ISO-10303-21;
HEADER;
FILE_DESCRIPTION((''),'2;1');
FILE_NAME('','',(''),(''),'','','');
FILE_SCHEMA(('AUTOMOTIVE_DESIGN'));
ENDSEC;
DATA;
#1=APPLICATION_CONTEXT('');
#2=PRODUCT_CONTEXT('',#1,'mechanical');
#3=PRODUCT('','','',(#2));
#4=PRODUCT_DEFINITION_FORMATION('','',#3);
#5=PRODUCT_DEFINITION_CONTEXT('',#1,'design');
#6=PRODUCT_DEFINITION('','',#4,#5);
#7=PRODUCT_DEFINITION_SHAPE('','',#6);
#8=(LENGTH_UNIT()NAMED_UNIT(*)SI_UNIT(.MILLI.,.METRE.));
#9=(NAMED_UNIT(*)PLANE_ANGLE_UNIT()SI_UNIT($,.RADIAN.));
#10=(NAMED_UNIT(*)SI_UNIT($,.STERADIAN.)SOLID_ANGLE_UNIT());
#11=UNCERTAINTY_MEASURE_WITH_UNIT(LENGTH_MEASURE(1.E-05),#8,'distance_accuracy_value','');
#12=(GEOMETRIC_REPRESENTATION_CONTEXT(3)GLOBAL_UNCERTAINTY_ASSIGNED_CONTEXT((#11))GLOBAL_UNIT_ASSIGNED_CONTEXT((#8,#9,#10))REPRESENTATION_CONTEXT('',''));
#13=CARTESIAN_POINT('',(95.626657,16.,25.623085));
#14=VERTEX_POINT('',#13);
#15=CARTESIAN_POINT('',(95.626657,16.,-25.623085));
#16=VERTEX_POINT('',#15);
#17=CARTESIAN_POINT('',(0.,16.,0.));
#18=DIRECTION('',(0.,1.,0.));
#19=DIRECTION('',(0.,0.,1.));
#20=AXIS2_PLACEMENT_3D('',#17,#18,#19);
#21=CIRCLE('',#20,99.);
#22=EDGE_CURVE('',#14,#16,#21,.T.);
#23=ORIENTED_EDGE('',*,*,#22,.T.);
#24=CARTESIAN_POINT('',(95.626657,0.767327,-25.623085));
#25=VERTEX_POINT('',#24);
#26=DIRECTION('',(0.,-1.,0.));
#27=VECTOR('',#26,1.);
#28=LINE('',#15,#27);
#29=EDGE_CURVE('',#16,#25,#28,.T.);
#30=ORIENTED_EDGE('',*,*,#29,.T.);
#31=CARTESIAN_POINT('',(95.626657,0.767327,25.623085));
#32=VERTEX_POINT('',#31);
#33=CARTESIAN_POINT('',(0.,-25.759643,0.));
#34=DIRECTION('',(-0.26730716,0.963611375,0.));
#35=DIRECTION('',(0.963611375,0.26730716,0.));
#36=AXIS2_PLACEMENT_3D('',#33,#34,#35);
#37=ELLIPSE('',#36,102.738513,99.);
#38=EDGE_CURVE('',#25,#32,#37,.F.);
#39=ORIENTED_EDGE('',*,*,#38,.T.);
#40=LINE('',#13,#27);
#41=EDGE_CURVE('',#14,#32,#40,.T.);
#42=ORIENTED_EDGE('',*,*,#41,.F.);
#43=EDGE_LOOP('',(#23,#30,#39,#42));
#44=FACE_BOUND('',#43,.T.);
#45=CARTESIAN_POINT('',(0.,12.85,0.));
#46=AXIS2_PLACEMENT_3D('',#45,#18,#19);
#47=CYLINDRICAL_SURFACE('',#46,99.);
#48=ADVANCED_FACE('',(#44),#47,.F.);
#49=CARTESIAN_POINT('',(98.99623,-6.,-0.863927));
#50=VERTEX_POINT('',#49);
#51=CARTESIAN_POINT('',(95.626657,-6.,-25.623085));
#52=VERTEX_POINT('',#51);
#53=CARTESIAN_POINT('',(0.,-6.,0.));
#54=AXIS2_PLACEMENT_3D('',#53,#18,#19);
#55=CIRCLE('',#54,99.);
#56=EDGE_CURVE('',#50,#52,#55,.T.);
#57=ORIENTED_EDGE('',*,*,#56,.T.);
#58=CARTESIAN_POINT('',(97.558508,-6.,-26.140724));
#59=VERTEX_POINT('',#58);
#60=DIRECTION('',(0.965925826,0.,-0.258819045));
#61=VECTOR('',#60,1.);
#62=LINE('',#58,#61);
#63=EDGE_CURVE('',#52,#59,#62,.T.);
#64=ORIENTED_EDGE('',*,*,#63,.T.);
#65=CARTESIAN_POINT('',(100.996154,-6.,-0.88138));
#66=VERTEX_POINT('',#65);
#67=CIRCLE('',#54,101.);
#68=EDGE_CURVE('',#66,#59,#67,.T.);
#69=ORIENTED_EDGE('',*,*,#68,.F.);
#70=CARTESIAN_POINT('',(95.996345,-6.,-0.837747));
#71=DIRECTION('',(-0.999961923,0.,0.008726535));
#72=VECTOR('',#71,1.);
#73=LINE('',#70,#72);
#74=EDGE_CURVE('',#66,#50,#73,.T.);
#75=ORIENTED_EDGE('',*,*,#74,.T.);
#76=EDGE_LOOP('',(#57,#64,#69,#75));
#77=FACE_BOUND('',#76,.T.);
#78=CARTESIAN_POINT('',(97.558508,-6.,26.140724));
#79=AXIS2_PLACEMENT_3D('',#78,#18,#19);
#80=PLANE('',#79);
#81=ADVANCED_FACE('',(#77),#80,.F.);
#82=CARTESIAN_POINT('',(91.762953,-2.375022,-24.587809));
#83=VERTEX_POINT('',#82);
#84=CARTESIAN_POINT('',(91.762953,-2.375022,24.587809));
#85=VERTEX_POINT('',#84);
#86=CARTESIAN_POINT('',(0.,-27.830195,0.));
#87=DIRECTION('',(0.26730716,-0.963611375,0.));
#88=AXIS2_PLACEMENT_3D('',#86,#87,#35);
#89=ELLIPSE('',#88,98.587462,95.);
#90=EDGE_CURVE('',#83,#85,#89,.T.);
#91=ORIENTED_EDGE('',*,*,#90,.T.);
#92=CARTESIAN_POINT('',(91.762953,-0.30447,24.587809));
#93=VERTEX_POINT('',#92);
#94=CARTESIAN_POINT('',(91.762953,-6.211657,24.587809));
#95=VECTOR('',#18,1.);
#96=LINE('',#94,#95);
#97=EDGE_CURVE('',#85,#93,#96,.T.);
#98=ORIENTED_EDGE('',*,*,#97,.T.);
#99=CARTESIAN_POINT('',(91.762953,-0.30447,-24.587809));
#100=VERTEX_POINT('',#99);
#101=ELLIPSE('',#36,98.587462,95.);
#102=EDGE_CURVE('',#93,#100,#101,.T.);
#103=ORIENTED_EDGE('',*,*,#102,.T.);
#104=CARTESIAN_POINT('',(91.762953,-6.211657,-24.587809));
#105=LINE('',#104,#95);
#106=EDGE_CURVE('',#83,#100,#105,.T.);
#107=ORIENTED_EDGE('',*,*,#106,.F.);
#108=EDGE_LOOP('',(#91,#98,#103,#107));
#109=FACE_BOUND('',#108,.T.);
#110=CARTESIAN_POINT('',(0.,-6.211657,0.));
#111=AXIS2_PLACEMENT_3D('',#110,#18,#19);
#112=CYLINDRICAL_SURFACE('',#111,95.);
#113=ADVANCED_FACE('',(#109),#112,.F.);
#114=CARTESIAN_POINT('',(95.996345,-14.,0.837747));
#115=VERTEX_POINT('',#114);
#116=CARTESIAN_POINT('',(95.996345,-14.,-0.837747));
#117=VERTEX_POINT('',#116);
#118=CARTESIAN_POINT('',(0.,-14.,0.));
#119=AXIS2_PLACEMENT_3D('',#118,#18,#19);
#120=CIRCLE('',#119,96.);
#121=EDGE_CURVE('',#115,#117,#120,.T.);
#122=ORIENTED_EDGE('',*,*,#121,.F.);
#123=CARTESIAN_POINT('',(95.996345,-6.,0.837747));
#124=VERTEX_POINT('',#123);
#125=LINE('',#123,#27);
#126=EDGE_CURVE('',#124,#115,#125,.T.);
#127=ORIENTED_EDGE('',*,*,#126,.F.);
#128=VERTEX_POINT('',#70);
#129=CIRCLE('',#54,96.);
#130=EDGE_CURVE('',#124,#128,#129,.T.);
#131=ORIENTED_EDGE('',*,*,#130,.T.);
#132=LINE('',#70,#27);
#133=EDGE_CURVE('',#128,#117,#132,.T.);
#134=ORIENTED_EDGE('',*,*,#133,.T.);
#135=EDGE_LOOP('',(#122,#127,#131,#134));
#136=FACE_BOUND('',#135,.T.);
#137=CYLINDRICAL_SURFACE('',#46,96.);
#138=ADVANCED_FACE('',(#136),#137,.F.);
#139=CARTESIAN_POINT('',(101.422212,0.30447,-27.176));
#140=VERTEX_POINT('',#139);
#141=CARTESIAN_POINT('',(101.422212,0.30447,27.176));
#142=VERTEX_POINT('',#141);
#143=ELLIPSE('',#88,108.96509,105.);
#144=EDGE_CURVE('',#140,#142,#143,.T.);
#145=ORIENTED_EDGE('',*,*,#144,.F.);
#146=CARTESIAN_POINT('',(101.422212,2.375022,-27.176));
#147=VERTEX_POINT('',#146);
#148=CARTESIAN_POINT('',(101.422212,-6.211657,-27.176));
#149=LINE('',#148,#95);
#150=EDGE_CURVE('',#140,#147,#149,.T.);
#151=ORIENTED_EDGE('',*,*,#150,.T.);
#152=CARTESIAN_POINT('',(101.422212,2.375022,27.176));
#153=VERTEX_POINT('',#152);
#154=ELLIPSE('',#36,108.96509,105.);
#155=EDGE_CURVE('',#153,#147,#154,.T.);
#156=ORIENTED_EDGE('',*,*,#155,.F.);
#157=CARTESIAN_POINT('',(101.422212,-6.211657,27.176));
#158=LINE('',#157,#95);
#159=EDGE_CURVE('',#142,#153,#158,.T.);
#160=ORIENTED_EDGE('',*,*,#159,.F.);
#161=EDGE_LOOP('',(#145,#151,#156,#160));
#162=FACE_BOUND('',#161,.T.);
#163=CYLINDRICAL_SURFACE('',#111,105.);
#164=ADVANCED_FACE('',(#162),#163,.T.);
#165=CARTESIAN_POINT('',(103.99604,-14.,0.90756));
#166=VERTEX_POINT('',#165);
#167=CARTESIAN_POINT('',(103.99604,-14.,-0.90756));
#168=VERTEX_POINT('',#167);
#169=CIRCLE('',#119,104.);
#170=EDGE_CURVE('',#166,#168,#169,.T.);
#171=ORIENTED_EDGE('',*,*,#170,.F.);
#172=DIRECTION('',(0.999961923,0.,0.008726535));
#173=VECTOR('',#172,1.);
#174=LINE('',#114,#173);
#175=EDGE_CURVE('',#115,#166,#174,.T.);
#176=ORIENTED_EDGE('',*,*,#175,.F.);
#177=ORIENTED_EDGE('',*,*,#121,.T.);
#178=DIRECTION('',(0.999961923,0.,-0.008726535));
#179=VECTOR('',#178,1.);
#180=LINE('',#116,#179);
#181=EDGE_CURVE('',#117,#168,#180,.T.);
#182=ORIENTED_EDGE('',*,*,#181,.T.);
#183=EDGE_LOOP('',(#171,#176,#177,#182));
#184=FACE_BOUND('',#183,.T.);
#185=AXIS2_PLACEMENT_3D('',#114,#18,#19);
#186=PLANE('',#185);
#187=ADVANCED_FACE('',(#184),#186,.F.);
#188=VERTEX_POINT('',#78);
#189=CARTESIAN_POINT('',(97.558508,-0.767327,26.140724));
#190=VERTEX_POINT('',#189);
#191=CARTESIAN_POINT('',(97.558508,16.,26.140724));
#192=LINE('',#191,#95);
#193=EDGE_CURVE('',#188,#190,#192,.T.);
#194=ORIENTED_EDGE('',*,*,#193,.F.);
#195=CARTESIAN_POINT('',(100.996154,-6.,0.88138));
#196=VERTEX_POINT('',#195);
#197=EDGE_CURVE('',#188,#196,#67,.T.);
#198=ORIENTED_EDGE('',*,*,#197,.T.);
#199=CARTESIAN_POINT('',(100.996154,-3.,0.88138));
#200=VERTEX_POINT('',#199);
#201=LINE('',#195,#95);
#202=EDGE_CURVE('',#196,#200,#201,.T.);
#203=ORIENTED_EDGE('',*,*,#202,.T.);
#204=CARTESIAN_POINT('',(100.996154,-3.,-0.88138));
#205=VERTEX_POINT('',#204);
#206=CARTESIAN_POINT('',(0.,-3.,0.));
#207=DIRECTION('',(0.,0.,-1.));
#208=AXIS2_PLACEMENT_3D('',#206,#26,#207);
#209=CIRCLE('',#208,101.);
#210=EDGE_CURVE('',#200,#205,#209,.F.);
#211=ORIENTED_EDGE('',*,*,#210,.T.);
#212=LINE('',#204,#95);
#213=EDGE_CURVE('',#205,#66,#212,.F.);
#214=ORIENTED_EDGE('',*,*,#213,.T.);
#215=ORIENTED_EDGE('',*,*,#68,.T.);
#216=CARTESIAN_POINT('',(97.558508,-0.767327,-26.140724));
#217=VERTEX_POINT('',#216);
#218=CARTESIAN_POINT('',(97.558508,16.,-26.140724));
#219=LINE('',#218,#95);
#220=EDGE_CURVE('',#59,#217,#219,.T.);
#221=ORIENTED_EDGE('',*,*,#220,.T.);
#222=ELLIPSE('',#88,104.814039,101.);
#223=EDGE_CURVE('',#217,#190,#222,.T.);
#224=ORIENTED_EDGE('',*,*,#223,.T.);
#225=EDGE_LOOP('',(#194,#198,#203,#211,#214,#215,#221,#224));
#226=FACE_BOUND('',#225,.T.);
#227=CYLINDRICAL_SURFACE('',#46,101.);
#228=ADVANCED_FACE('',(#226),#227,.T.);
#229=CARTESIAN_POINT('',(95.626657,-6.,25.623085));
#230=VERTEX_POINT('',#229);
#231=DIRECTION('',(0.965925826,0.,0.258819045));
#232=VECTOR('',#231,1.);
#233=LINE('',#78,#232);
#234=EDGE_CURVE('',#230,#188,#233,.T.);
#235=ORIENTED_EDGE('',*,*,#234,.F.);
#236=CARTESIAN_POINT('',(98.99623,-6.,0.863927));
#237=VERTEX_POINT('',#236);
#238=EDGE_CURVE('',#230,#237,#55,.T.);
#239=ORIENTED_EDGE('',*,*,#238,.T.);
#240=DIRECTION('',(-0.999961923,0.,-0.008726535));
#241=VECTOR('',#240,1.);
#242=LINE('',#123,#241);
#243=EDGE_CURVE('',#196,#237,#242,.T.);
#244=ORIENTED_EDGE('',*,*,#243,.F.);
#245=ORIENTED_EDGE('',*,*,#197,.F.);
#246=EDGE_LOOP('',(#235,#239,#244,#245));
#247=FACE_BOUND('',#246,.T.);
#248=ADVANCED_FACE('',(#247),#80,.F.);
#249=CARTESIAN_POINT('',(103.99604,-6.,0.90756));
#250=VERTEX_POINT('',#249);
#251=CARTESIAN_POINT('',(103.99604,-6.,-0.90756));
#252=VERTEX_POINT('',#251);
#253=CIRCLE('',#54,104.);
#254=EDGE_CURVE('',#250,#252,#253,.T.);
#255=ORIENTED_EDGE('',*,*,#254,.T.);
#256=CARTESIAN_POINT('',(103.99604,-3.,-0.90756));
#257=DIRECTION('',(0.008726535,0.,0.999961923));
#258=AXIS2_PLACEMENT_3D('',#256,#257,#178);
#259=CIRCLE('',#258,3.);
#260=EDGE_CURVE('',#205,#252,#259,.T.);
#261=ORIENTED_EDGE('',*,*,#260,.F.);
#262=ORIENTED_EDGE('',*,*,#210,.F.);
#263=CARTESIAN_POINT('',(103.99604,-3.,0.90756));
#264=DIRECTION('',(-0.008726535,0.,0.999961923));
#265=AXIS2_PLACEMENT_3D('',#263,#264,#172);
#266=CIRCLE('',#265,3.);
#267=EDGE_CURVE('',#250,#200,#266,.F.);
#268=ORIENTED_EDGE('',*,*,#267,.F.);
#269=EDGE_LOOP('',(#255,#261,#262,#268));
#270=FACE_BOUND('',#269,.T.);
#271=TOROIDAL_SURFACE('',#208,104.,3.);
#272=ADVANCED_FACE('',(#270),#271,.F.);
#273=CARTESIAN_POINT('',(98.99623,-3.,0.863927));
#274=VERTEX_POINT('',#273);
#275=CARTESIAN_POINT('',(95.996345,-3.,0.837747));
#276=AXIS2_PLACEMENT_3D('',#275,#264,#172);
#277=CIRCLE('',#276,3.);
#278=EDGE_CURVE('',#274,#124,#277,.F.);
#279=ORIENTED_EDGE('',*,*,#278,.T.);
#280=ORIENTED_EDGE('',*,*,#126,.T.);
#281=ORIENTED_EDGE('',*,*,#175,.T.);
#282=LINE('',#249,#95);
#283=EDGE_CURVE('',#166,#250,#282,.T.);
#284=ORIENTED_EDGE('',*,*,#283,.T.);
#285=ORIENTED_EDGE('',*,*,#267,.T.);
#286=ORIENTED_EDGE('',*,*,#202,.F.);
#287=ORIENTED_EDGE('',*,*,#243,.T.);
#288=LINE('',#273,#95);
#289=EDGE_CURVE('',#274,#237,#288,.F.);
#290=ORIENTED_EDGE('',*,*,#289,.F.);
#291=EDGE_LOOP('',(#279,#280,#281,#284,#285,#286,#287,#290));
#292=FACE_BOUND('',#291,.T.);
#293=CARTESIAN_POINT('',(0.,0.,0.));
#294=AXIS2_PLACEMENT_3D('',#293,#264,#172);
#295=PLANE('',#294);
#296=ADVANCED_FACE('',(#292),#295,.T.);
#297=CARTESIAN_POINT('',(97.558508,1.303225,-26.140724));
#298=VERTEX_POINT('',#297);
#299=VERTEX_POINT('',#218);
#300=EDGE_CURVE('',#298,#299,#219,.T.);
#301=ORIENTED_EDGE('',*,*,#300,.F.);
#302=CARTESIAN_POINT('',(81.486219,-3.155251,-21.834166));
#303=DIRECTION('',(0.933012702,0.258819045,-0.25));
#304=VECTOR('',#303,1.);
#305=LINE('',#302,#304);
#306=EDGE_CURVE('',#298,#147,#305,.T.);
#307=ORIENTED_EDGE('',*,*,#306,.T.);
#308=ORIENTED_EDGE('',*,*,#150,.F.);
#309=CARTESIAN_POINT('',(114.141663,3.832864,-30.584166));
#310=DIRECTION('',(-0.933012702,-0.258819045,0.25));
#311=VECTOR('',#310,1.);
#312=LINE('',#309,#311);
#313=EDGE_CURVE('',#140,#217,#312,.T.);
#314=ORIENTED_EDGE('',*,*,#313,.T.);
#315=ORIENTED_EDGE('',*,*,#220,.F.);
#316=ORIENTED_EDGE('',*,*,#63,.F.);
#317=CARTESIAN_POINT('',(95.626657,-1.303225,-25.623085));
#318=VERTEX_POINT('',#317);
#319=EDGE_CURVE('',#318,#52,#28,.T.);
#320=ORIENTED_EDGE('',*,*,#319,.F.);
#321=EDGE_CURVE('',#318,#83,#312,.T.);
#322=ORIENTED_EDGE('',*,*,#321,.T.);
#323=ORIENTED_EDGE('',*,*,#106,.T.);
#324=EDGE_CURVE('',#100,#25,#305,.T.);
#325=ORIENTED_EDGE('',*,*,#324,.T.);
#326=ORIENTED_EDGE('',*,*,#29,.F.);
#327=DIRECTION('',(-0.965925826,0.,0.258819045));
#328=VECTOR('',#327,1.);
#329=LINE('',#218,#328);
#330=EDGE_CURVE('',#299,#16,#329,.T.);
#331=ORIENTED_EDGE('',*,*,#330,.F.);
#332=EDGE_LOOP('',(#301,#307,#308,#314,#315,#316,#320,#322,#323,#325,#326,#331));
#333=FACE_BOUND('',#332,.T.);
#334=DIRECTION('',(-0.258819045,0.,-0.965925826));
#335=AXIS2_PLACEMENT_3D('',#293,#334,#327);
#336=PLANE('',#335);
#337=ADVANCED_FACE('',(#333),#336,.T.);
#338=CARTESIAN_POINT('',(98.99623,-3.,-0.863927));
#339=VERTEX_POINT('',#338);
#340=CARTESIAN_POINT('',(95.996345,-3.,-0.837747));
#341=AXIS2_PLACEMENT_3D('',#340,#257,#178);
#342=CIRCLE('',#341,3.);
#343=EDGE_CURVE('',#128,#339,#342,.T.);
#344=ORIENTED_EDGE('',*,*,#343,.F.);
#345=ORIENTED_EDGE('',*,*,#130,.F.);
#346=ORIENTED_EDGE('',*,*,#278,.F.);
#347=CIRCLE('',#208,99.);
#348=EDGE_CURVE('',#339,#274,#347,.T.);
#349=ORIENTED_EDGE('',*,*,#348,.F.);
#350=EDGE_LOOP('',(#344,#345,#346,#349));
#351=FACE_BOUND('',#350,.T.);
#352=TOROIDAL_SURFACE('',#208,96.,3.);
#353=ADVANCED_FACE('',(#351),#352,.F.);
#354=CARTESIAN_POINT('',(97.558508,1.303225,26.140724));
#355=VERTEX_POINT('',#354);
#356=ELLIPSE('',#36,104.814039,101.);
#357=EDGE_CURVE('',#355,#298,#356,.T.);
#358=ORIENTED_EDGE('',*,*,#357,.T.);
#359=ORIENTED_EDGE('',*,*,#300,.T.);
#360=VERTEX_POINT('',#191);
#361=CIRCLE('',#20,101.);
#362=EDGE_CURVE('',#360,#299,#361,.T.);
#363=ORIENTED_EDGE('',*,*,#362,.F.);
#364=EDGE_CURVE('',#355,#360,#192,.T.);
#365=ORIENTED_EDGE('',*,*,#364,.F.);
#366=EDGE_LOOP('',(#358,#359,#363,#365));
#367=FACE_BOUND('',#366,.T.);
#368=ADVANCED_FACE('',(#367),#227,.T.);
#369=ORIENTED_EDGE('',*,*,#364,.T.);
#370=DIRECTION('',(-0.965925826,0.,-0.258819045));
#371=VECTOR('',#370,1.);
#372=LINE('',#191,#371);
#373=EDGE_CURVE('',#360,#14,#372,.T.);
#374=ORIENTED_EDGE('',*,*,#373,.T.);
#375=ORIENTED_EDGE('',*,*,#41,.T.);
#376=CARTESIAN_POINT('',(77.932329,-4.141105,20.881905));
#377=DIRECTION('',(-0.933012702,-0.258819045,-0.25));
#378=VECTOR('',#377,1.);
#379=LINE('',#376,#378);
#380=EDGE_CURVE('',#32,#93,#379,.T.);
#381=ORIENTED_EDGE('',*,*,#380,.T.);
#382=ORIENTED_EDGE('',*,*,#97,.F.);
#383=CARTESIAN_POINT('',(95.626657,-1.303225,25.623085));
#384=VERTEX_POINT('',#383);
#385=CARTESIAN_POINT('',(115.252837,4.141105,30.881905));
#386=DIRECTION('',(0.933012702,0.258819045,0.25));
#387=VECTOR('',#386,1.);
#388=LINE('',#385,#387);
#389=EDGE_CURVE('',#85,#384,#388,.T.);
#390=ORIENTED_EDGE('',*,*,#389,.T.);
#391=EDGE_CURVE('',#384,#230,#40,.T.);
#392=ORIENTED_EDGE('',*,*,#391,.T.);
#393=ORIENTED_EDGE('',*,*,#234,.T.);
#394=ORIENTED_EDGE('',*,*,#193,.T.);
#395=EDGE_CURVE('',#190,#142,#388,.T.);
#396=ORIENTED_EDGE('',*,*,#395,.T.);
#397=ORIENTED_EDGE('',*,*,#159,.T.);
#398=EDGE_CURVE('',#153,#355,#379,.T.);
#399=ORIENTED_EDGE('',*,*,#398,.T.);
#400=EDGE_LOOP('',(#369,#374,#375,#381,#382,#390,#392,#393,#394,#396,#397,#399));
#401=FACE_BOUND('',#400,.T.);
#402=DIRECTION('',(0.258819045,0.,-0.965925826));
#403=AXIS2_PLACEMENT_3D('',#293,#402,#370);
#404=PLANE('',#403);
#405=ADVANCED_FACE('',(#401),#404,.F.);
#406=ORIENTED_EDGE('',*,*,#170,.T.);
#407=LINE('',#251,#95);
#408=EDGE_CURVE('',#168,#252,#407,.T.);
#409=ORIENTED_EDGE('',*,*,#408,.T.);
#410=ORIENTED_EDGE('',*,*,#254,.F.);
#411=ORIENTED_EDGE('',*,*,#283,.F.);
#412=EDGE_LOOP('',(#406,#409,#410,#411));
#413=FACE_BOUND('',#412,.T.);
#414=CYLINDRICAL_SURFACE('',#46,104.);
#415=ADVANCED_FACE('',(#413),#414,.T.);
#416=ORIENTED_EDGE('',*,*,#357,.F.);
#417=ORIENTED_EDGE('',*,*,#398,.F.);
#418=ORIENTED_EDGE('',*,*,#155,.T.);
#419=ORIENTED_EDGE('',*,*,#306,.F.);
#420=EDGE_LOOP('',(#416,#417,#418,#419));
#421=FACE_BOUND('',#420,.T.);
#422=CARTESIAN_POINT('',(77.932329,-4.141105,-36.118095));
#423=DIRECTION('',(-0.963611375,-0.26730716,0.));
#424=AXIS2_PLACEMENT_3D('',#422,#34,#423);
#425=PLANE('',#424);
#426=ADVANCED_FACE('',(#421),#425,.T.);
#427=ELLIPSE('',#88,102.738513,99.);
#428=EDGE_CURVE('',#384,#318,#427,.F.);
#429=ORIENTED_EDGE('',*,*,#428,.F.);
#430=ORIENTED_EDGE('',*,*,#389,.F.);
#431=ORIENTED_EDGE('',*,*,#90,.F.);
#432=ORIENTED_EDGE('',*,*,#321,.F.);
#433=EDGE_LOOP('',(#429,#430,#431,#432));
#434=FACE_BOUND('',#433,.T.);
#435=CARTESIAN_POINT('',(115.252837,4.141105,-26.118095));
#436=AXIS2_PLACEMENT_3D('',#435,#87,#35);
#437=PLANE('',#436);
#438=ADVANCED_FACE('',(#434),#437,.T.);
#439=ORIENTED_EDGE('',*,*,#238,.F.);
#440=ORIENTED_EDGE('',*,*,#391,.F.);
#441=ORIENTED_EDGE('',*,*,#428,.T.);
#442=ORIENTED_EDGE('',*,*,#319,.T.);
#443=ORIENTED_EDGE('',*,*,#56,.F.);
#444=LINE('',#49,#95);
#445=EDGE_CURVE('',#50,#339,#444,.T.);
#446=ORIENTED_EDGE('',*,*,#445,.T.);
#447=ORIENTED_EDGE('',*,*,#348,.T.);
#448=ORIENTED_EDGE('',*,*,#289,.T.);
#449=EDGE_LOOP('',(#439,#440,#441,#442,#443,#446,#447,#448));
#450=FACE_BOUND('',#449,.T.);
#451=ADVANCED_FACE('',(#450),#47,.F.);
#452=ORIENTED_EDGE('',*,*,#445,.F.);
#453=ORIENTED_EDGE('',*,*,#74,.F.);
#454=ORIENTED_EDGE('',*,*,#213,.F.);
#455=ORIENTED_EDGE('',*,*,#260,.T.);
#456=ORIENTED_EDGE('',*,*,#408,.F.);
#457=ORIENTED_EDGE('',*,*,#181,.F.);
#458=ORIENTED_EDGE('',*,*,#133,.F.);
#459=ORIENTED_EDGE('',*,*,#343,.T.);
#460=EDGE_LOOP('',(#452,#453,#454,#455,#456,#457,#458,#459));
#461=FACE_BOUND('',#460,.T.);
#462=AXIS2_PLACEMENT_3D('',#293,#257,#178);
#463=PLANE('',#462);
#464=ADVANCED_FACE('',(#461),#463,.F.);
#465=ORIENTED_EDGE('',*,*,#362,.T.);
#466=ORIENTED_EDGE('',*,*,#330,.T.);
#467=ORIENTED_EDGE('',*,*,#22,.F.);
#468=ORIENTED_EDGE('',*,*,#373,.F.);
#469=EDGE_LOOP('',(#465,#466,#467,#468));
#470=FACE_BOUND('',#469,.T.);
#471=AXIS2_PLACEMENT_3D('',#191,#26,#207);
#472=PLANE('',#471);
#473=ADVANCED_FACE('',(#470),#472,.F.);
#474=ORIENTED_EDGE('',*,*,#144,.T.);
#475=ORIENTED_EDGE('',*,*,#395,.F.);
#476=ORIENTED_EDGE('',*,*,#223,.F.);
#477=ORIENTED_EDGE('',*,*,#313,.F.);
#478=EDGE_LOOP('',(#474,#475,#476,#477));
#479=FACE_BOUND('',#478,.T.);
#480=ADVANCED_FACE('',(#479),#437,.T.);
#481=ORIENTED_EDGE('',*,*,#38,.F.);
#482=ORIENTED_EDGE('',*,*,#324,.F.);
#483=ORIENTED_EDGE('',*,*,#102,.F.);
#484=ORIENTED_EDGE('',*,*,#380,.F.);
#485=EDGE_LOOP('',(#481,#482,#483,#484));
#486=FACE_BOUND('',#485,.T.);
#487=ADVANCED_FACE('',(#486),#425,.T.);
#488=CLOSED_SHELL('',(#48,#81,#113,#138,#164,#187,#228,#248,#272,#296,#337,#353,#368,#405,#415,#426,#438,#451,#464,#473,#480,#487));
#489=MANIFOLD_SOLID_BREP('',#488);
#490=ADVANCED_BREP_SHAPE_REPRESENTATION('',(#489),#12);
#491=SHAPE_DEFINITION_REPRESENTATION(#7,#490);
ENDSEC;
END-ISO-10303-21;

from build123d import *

# Parameters (mm, degrees)
SKETCH1_W           = 2
SKETCH1_H           = 22
REVOLVE1_ANGLE      = 30
BOSS_EXTRUDE2_DEPTH = 57
CUT_EXTRUDE1_START  = -6.211657082
CUT_EXTRUDE1_DEPTH  = 12.423314164
SKETCH16_W          = 8
SKETCH16_H          = 8
REVOLVE2_ANGLE      = 1
FILLET2_R           = 3


# Read off the part's stored shape, not the designer's step: Cut-Extrude1
with BuildPart() as part:
    # Sketch1 → Revolve1 (revolve, symmetric)
    with BuildSketch(Plane.XY) as revolve1_sk:
        with Locations((100, 5)):
            Rectangle(SKETCH1_W, SKETCH1_H)
    revolve(axis=Axis((0, 12.85, 0), (0, -1, 0)), revolution_arc=REVOLVE1_ANGLE / 2)
    revolve(revolve1_sk.sketch, axis=Axis((0, 12.85, 0), (0, 1, 0)), revolution_arc=REVOLVE1_ANGLE / 2)

    # Sketch13 → Boss-Extrude2 (add, along a direction that is not the sketch's normal)
    with BuildSketch(Plane(origin=(0, 0, 0), x_dir=(0.9659258262890682, 0, 0.25881904510252124), z_dir=(-0.25881904510252124, 0, 0.9659258262890682))):
        Polygon((80.681483474, -4.141104722), (119.318516526, 6.211657082), (119.318516526, 4.141104722), (80.681483474, -6.211657082), align=None)
    extrude(amount=-BOSS_EXTRUDE2_DEPTH, dir=(0, 0, 1))

    # Cut-Extrude1 outline → Cut-Extrude1 (cut)
    with BuildSketch(Plane(origin=(0, 0, 0), x_dir=(1, 0, 0), z_dir=(0, 1, 0)).offset(CUT_EXTRUDE1_START)):
        with BuildLine():
            Line((91.762953497, 24.587809285), (101.42221176, 27.175999736))
            ThreePointArc((101.42221176, 27.175999736), (105, 0), (101.42221176, -27.175999736))
            Line((101.42221176, -27.175999736), (115.252836667, -30.88190451))
            Line((115.252836667, -30.88190451), (115.252836667, 26.11809549))
            Line((115.252836667, 26.11809549), (77.932328591, 36.11809549))
            Line((77.932328591, 36.11809549), (77.932328591, -20.88190451))
            Line((77.932328591, -20.88190451), (91.762953497, -24.587809285))
            ThreePointArc((91.762953497, -24.587809285), (95, 0), (91.762953497, 24.587809285))
        make_face()
    extrude(amount=CUT_EXTRUDE1_DEPTH, mode=Mode.SUBTRACT)

    # Sketch16 → Revolve2 (revolve, symmetric)
    with BuildSketch(Plane.XY) as revolve2_sk:
        with Locations((100, -10)):
            Rectangle(SKETCH16_W, SKETCH16_H)
    revolve(axis=Axis((0, 12.85, 0), (0, -1, 0)), revolution_arc=REVOLVE2_ANGLE / 2)
    revolve(revolve2_sk.sketch, axis=Axis((0, 12.85, 0), (0, 1, 0)), revolution_arc=REVOLVE2_ANGLE / 2)

    # Fillet2
    fillet2_edges = [part.edges().sort_by_distance(p)[0] for p in [
        (99, -6, 0),
        (101, -6, 0),
    ]]
    fillet(fillet2_edges, radius=FILLET2_R - 0.0001)  # a hair under: the kernel refuses the full size


solid = part.part
